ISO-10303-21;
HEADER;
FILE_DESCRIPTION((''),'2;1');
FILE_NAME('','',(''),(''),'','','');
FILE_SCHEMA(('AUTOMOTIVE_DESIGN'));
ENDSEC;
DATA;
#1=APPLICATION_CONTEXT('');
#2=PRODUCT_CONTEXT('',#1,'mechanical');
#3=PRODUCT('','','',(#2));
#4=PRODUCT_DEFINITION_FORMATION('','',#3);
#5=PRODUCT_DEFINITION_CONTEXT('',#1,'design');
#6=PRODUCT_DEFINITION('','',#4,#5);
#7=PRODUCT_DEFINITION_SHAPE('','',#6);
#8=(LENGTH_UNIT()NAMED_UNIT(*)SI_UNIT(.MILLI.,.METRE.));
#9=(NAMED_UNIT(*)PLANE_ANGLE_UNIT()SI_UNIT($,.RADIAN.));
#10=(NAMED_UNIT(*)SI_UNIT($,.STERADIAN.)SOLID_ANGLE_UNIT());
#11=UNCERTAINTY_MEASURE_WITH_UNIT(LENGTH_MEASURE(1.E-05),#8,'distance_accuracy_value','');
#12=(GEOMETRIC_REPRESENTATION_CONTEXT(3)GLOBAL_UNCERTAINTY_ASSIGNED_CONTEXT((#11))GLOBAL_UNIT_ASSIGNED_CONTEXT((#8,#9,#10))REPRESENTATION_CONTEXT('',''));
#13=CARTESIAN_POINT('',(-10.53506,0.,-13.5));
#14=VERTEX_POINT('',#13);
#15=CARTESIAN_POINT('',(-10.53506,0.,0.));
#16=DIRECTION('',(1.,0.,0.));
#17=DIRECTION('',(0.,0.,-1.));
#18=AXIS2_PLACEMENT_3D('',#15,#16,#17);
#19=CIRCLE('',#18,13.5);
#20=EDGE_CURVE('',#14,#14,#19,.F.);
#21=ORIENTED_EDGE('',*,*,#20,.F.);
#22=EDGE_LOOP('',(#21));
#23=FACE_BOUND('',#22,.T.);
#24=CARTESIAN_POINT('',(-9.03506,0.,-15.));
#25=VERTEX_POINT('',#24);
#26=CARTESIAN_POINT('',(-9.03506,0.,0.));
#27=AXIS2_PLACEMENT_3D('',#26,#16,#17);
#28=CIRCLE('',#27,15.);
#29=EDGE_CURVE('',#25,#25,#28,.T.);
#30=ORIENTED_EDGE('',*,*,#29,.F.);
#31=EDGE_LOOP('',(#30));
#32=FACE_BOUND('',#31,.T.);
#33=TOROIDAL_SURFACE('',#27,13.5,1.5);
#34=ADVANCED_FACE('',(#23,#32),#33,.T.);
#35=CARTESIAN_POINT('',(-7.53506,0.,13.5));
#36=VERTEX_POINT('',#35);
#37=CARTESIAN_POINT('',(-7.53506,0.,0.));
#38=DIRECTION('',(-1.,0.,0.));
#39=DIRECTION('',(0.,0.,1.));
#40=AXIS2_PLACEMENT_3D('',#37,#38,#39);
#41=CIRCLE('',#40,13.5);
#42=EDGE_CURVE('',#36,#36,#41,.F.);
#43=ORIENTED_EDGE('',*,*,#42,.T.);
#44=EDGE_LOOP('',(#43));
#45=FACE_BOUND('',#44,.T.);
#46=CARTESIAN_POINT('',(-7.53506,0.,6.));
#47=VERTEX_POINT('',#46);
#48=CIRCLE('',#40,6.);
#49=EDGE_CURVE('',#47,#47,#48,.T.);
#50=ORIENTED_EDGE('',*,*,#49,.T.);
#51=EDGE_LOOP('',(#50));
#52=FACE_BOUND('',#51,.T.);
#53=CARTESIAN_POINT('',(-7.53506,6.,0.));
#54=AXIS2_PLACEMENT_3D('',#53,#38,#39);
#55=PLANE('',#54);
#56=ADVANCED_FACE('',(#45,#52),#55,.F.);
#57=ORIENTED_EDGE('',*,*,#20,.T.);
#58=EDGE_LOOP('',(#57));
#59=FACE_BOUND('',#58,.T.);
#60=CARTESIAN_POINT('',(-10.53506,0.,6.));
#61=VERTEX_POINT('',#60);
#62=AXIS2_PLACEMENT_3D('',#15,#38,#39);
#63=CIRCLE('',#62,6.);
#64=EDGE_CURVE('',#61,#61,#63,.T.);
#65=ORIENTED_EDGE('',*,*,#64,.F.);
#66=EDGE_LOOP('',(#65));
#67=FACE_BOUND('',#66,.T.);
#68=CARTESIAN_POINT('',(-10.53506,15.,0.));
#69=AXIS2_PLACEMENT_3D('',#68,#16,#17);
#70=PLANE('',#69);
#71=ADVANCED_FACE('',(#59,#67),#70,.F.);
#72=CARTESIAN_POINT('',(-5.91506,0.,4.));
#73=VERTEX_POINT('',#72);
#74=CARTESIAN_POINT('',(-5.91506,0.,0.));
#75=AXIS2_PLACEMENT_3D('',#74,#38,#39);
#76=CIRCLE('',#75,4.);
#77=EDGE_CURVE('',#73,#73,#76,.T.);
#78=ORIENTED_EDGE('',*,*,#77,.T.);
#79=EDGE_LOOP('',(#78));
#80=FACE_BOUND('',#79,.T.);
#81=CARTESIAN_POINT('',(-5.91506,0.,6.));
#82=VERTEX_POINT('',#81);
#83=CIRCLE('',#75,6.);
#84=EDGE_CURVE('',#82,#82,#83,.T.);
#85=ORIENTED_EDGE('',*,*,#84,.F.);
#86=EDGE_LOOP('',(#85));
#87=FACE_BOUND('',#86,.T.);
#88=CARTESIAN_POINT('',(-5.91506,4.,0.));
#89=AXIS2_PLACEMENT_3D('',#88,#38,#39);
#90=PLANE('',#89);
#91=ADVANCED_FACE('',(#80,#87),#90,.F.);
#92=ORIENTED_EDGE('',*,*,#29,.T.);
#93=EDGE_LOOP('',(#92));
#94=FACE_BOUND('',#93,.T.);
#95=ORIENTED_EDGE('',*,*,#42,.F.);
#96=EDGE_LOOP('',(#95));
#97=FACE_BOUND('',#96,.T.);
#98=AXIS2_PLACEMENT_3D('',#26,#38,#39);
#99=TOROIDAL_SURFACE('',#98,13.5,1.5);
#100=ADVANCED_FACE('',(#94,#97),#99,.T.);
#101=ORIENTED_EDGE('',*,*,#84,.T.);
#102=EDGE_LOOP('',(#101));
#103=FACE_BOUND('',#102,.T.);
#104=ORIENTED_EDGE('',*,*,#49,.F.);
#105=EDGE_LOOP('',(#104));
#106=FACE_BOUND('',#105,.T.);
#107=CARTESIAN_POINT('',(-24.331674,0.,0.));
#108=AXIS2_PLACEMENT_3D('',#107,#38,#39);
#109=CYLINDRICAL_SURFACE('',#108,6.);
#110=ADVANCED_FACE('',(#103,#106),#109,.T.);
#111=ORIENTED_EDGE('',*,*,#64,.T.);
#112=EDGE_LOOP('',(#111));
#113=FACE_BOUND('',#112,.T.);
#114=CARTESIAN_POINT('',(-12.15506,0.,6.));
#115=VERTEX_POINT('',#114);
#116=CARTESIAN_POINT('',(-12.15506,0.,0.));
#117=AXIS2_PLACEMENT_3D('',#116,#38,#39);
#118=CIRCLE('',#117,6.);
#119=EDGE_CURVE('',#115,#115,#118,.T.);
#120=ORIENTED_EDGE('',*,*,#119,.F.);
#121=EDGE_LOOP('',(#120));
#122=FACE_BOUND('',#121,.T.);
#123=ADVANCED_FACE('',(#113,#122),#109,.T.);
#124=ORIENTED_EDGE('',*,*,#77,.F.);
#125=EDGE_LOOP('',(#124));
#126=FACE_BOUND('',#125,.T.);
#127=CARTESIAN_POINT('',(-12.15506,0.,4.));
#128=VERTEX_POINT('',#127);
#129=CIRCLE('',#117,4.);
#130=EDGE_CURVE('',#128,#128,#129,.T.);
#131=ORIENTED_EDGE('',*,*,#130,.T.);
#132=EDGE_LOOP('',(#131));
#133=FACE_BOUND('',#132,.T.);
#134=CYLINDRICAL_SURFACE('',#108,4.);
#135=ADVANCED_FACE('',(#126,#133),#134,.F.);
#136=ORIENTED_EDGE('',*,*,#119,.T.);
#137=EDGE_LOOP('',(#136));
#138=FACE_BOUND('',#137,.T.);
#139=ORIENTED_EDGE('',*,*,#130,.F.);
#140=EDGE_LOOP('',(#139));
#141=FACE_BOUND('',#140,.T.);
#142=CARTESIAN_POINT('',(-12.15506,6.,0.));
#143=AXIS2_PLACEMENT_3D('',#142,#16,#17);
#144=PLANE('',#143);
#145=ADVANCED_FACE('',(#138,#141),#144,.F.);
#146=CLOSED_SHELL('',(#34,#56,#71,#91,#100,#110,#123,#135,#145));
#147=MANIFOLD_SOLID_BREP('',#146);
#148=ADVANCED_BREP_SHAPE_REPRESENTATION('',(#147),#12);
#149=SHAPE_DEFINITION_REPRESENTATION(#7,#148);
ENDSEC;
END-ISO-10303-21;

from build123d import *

# Parameters (mm, degrees)
FILLET_1_R = 1.5


with BuildPart() as part:
    # 草图1 → 旋转2 (revolve)
    with BuildSketch(Plane.XY, mode=Mode.PRIVATE) as revolve_2_sk:
        Polygon((-12.155060406, 4), (-5.915060406, 4), (-5.915060406, 6), (-7.535060406, 6), (-7.535060406, 15), (-10.535060406, 15), (-10.535060406, 6), (-12.155060406, 6), align=None)
    revolve(revolve_2_sk.sketch.rotate(Axis((-24.331674281, 0, 0), (1, 0, 0)), 90), axis=Axis((-24.331674281, 0, 0), (1, 0, 0)))

    # 圆角1
    fillet_1_edges = [part.edges().sort_by_distance(p)[0] for p in [
        (-10.535060406, 0, -15),
        (-7.535060406, 0, -15),
    ]]
    fillet(fillet_1_edges, radius=FILLET_1_R - 0.0001)  # a hair under: the kernel refuses the full size


solid = part.part
